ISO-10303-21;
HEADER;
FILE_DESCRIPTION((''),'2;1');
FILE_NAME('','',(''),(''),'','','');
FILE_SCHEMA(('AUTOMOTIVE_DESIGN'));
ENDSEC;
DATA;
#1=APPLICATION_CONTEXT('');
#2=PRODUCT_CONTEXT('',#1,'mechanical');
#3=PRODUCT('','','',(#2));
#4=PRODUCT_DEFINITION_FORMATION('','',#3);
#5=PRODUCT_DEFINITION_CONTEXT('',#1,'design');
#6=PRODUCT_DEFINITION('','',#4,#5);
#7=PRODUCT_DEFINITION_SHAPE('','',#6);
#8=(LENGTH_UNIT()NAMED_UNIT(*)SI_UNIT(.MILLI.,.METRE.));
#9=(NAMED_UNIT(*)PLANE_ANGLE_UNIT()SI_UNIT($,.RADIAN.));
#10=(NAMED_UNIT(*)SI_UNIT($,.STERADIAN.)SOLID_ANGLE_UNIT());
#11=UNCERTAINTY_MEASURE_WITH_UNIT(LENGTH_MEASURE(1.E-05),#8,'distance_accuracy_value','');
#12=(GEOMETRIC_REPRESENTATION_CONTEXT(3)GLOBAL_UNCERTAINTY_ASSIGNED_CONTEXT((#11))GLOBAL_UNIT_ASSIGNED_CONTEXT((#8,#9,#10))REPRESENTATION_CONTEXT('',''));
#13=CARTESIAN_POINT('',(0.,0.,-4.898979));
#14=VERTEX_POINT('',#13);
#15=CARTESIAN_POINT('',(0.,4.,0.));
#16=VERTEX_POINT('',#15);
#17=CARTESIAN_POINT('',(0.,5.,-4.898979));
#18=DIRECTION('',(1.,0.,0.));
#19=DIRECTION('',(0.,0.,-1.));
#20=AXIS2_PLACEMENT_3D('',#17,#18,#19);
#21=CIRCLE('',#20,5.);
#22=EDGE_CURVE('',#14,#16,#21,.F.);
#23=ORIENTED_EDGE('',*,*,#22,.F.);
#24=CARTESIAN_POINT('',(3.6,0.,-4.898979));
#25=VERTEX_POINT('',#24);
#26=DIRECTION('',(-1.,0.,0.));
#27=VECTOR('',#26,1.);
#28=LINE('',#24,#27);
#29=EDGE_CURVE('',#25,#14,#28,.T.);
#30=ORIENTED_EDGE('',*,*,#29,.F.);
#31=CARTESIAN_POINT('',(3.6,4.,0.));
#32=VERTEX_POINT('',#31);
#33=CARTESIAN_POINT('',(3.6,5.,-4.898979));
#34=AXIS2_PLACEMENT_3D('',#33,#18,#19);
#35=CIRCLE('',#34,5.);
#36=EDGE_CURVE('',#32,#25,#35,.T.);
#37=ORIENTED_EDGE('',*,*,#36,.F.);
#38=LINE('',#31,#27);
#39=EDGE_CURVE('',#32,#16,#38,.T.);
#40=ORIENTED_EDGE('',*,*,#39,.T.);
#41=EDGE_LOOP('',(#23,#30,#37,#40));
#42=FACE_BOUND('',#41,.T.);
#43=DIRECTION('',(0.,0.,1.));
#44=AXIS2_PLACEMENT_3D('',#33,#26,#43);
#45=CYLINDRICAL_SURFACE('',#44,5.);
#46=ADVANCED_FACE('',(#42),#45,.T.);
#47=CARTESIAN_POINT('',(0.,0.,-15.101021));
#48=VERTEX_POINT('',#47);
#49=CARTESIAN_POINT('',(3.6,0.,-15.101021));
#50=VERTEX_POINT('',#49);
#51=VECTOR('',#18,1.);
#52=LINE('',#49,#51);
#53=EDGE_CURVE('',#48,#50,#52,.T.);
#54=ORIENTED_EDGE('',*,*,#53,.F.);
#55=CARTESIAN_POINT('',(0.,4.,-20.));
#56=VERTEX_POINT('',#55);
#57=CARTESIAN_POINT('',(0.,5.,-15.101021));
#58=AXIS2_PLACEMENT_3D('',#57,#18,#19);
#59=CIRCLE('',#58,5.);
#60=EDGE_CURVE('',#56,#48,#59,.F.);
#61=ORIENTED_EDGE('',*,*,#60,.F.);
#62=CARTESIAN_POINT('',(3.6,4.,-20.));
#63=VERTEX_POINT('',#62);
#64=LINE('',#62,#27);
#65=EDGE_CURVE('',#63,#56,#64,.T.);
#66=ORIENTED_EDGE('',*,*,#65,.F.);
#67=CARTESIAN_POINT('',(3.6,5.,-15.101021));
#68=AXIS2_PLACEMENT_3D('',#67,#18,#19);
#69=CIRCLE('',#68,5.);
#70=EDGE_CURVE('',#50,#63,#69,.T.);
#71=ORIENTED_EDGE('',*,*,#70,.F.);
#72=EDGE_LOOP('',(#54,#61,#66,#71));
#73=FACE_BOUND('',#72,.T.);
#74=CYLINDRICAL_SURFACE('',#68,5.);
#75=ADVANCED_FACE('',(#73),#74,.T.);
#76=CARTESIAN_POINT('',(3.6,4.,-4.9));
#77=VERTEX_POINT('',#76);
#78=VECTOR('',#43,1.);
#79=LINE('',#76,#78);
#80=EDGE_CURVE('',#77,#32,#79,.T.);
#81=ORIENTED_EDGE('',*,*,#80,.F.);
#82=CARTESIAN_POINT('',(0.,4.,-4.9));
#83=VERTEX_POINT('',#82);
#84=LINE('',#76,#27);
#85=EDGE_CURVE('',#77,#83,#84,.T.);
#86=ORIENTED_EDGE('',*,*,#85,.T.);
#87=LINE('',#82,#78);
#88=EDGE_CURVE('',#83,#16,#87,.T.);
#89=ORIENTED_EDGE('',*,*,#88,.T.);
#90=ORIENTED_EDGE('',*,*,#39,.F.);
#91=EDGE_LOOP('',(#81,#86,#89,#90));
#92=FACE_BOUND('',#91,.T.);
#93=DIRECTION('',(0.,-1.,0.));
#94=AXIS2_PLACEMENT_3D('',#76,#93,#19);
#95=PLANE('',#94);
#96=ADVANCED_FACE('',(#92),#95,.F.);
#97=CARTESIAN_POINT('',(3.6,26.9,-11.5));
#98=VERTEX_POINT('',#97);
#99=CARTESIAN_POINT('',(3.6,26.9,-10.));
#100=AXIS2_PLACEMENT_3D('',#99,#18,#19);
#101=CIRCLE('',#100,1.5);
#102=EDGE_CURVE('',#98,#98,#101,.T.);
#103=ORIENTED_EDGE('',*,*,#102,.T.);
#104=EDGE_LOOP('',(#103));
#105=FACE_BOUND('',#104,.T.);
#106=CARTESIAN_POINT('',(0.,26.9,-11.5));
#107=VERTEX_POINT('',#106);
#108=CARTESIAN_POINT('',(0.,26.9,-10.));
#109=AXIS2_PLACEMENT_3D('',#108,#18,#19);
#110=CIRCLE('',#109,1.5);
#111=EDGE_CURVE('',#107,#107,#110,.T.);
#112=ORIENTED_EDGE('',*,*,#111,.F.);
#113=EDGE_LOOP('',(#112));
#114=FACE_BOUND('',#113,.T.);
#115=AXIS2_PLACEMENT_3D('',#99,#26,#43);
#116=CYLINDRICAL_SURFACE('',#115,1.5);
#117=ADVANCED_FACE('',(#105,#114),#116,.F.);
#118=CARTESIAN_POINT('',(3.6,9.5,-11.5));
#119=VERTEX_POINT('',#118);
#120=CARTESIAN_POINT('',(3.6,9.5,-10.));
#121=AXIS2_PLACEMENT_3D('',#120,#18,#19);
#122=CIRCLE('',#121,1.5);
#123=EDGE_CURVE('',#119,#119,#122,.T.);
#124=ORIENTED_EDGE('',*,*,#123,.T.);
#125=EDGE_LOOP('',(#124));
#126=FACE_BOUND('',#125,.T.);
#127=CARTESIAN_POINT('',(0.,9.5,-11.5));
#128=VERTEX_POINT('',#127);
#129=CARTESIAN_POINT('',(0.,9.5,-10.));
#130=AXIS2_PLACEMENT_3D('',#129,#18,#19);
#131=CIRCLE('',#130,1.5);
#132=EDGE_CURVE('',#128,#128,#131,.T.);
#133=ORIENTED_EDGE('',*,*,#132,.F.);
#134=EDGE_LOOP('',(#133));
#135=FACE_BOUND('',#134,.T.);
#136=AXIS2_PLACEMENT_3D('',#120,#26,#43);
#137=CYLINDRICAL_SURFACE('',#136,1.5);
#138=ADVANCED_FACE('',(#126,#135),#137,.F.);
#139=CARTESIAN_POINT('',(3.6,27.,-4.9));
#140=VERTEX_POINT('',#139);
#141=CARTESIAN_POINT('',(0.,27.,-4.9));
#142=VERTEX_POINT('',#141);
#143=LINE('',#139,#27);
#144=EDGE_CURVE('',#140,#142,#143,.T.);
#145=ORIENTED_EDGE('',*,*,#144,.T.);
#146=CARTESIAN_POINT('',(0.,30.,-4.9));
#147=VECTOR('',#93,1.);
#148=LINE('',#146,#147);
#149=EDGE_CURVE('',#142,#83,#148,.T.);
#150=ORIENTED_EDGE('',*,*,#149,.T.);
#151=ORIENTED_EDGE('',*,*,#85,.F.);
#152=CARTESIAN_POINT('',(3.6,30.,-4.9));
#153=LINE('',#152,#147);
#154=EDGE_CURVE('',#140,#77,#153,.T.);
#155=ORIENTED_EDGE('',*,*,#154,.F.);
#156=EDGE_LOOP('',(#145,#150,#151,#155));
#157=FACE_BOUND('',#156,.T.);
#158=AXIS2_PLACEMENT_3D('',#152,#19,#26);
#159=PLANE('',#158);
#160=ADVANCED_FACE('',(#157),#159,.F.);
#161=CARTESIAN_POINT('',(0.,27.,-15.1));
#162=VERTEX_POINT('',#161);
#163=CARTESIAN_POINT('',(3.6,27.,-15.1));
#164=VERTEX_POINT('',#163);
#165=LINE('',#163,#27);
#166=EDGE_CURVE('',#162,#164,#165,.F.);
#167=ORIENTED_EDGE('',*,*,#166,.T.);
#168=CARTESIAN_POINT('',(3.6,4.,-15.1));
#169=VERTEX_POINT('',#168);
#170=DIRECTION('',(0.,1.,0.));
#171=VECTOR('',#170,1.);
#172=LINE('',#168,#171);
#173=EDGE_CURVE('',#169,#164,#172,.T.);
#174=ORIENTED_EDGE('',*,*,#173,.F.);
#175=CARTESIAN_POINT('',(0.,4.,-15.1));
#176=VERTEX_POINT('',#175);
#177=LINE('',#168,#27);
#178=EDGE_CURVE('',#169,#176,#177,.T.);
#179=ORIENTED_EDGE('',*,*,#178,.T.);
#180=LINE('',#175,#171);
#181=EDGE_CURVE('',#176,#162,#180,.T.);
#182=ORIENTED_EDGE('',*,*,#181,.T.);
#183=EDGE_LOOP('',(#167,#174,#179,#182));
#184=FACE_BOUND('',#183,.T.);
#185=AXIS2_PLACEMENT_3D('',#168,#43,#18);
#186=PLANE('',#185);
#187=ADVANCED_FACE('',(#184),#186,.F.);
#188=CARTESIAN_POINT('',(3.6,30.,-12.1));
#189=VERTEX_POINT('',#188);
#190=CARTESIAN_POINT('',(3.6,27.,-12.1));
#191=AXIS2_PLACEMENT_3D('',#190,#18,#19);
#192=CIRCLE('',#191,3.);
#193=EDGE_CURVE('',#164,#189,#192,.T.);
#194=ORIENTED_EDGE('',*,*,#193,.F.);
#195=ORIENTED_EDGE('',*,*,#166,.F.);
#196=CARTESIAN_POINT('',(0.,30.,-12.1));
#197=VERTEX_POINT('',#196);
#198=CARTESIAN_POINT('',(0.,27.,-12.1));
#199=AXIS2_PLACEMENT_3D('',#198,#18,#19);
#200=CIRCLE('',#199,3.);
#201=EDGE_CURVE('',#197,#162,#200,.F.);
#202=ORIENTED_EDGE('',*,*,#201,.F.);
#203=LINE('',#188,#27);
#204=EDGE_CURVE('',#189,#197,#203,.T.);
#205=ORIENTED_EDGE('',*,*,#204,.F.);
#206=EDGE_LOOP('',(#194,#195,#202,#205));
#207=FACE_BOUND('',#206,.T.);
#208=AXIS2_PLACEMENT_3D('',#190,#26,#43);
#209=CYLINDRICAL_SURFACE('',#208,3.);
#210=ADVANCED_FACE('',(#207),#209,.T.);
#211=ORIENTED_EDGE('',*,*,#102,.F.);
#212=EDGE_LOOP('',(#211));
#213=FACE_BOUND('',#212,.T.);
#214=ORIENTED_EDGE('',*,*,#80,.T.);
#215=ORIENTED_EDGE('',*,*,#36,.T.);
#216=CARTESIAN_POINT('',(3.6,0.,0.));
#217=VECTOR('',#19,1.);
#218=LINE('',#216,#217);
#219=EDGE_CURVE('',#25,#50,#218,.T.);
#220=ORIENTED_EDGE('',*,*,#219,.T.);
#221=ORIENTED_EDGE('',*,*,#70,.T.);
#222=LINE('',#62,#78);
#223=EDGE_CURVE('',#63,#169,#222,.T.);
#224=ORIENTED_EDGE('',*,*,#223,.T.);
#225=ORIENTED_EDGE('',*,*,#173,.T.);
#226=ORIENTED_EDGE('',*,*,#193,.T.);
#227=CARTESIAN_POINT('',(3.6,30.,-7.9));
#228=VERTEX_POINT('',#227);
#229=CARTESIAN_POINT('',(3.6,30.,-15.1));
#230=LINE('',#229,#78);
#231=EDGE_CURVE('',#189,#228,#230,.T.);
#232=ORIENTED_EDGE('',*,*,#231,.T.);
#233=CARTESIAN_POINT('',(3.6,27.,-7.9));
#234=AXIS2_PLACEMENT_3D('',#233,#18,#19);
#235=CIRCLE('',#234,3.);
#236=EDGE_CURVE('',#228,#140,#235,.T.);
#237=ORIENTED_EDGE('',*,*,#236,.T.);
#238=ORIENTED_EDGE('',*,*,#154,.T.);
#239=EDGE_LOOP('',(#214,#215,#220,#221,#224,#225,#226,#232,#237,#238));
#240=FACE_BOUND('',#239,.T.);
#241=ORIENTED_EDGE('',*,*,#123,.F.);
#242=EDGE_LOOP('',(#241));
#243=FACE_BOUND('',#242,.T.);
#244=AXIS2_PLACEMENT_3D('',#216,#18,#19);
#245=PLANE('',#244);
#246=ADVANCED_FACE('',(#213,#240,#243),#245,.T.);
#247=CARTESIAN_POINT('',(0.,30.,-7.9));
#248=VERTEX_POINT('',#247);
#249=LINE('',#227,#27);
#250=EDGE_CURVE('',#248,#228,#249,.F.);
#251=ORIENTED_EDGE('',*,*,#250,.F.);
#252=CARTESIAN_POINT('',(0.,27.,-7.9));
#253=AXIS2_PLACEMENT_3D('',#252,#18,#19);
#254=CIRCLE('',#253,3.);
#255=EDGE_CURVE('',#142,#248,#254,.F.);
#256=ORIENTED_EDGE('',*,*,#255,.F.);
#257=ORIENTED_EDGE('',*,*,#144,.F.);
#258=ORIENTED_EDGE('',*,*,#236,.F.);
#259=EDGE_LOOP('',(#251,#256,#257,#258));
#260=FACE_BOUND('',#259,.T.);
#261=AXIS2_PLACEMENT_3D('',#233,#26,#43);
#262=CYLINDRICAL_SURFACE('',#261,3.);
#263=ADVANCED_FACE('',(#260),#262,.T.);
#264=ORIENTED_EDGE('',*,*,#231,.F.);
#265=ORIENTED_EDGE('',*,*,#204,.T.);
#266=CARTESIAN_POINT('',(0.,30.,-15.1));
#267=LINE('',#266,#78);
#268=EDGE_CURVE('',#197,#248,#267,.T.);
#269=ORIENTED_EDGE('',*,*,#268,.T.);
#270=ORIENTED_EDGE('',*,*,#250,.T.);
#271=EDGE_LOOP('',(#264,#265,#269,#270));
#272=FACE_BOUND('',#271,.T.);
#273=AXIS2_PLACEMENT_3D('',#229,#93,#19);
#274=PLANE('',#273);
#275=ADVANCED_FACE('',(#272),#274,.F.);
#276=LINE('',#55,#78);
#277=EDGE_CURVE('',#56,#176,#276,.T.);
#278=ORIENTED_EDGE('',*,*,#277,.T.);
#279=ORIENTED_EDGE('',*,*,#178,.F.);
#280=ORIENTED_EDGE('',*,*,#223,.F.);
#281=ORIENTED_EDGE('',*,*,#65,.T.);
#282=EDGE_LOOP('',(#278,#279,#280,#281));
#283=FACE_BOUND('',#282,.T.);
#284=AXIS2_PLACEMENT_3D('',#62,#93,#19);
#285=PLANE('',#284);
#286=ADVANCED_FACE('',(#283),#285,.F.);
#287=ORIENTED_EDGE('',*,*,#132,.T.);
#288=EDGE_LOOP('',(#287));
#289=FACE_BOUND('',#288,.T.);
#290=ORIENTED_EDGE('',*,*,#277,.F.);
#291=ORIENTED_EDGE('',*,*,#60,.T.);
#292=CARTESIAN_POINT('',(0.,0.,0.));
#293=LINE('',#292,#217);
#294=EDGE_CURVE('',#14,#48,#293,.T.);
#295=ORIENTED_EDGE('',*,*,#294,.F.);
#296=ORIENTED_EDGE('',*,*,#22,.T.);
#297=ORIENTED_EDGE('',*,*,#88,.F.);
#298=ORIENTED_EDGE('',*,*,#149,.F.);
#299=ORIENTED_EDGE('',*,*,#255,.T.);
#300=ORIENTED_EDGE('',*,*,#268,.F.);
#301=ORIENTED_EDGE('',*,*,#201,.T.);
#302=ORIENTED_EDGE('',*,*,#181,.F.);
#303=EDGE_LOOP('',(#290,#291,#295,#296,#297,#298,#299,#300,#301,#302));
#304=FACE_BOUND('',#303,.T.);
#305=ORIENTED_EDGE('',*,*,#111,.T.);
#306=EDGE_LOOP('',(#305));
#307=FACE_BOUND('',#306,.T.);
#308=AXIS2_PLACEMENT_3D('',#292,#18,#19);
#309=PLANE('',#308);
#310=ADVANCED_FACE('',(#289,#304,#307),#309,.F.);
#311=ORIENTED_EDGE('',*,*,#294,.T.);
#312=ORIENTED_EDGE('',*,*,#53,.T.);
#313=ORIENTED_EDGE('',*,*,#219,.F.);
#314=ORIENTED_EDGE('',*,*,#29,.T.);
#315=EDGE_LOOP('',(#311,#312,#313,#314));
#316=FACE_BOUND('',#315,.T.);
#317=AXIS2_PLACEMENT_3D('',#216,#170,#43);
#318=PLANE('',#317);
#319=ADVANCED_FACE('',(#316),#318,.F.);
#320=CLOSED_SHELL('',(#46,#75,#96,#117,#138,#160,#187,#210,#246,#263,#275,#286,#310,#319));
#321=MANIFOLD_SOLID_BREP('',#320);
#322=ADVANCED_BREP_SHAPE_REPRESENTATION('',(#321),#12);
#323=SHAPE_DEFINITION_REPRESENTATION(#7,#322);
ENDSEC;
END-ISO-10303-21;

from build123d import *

# Parameters (mm, degrees)
ESBO_O1_R                = 1.5
RESSALTO_EXTRUS_O1_DEPTH = 3.6
FILETE1_R                = 3
FILETE2_R                = 5


with BuildPart() as part:
    # Esboço1 → Ressalto-extrusão1 (new body)
    with BuildSketch(Plane(origin=(0, 0, 0), x_dir=(0, 0, -1), z_dir=(1, 0, 0))):
        Polygon((0, 0), (20, 0), (20, 4), (15.1, 4), (15.1, 30), (4.9, 30), (4.9, 4), (0, 4), align=None)
        with Locations((10, 26.9)):
            Circle(ESBO_O1_R, mode=Mode.SUBTRACT)
        with Locations((10, 9.5)):
            Circle(ESBO_O1_R, mode=Mode.SUBTRACT)
    extrude(amount=RESSALTO_EXTRUS_O1_DEPTH)

    # Filete1
    filete1_edges = [part.edges().sort_by_distance(p)[0] for p in [
        (1.8, 30, -4.9),
        (1.8, 30, -15.1),
    ]]
    fillet(filete1_edges, radius=FILETE1_R)

    # Filete2
    # the kernel refuses this fillet: 5 mm, written as the material it takes off along each edge
    with BuildSketch(Plane(origin=(-12.247448714, 0, 0), x_dir=(0, 0, -1), z_dir=(1, 0, 0))) as filete2_piece_1:
        with BuildLine():
            CenterArc((4.898979486, 5), FILETE2_R, 191.536959033, 78.463040967)
            Line((0, 4), (-0.09797959, 3.98))
            ThreePointArc((-0.09797959, 3.98), (-0.1, 2), (-0.1, 0))
            Line((-0.1, 0), (0, -0.1))
            Line((0, -0.1), (4.898979486, -0.1))
            Line((4.898979486, -0.1), (4.898979486, 0))
        make_face()
    extrude(amount=28.094897428, mode=Mode.SUBTRACT)
    with BuildSketch(Plane(origin=(-12.247448714, 0, -20), x_dir=(0, 1.0, 1.5667467323505199e-12), z_dir=(1, 0, 0))) as filete2_piece_2:
        with BuildLine():
            CenterArc((5, 4.898979486), FILETE2_R, 180, 78.463040967)
            Line((0, 4.898979486), (-0.1, 4.898979486))
            Line((-0.1, 4.898979486), (-0.1, 0))
            Line((-0.1, 0), (0, -0.1))
            ThreePointArc((0, -0.1), (2, -0.1), (3.98, -0.09797959))
            Line((3.98, -0.09797959), (4, 0))
        make_face()
    extrude(amount=28.094897428, mode=Mode.SUBTRACT)


solid = part.part
